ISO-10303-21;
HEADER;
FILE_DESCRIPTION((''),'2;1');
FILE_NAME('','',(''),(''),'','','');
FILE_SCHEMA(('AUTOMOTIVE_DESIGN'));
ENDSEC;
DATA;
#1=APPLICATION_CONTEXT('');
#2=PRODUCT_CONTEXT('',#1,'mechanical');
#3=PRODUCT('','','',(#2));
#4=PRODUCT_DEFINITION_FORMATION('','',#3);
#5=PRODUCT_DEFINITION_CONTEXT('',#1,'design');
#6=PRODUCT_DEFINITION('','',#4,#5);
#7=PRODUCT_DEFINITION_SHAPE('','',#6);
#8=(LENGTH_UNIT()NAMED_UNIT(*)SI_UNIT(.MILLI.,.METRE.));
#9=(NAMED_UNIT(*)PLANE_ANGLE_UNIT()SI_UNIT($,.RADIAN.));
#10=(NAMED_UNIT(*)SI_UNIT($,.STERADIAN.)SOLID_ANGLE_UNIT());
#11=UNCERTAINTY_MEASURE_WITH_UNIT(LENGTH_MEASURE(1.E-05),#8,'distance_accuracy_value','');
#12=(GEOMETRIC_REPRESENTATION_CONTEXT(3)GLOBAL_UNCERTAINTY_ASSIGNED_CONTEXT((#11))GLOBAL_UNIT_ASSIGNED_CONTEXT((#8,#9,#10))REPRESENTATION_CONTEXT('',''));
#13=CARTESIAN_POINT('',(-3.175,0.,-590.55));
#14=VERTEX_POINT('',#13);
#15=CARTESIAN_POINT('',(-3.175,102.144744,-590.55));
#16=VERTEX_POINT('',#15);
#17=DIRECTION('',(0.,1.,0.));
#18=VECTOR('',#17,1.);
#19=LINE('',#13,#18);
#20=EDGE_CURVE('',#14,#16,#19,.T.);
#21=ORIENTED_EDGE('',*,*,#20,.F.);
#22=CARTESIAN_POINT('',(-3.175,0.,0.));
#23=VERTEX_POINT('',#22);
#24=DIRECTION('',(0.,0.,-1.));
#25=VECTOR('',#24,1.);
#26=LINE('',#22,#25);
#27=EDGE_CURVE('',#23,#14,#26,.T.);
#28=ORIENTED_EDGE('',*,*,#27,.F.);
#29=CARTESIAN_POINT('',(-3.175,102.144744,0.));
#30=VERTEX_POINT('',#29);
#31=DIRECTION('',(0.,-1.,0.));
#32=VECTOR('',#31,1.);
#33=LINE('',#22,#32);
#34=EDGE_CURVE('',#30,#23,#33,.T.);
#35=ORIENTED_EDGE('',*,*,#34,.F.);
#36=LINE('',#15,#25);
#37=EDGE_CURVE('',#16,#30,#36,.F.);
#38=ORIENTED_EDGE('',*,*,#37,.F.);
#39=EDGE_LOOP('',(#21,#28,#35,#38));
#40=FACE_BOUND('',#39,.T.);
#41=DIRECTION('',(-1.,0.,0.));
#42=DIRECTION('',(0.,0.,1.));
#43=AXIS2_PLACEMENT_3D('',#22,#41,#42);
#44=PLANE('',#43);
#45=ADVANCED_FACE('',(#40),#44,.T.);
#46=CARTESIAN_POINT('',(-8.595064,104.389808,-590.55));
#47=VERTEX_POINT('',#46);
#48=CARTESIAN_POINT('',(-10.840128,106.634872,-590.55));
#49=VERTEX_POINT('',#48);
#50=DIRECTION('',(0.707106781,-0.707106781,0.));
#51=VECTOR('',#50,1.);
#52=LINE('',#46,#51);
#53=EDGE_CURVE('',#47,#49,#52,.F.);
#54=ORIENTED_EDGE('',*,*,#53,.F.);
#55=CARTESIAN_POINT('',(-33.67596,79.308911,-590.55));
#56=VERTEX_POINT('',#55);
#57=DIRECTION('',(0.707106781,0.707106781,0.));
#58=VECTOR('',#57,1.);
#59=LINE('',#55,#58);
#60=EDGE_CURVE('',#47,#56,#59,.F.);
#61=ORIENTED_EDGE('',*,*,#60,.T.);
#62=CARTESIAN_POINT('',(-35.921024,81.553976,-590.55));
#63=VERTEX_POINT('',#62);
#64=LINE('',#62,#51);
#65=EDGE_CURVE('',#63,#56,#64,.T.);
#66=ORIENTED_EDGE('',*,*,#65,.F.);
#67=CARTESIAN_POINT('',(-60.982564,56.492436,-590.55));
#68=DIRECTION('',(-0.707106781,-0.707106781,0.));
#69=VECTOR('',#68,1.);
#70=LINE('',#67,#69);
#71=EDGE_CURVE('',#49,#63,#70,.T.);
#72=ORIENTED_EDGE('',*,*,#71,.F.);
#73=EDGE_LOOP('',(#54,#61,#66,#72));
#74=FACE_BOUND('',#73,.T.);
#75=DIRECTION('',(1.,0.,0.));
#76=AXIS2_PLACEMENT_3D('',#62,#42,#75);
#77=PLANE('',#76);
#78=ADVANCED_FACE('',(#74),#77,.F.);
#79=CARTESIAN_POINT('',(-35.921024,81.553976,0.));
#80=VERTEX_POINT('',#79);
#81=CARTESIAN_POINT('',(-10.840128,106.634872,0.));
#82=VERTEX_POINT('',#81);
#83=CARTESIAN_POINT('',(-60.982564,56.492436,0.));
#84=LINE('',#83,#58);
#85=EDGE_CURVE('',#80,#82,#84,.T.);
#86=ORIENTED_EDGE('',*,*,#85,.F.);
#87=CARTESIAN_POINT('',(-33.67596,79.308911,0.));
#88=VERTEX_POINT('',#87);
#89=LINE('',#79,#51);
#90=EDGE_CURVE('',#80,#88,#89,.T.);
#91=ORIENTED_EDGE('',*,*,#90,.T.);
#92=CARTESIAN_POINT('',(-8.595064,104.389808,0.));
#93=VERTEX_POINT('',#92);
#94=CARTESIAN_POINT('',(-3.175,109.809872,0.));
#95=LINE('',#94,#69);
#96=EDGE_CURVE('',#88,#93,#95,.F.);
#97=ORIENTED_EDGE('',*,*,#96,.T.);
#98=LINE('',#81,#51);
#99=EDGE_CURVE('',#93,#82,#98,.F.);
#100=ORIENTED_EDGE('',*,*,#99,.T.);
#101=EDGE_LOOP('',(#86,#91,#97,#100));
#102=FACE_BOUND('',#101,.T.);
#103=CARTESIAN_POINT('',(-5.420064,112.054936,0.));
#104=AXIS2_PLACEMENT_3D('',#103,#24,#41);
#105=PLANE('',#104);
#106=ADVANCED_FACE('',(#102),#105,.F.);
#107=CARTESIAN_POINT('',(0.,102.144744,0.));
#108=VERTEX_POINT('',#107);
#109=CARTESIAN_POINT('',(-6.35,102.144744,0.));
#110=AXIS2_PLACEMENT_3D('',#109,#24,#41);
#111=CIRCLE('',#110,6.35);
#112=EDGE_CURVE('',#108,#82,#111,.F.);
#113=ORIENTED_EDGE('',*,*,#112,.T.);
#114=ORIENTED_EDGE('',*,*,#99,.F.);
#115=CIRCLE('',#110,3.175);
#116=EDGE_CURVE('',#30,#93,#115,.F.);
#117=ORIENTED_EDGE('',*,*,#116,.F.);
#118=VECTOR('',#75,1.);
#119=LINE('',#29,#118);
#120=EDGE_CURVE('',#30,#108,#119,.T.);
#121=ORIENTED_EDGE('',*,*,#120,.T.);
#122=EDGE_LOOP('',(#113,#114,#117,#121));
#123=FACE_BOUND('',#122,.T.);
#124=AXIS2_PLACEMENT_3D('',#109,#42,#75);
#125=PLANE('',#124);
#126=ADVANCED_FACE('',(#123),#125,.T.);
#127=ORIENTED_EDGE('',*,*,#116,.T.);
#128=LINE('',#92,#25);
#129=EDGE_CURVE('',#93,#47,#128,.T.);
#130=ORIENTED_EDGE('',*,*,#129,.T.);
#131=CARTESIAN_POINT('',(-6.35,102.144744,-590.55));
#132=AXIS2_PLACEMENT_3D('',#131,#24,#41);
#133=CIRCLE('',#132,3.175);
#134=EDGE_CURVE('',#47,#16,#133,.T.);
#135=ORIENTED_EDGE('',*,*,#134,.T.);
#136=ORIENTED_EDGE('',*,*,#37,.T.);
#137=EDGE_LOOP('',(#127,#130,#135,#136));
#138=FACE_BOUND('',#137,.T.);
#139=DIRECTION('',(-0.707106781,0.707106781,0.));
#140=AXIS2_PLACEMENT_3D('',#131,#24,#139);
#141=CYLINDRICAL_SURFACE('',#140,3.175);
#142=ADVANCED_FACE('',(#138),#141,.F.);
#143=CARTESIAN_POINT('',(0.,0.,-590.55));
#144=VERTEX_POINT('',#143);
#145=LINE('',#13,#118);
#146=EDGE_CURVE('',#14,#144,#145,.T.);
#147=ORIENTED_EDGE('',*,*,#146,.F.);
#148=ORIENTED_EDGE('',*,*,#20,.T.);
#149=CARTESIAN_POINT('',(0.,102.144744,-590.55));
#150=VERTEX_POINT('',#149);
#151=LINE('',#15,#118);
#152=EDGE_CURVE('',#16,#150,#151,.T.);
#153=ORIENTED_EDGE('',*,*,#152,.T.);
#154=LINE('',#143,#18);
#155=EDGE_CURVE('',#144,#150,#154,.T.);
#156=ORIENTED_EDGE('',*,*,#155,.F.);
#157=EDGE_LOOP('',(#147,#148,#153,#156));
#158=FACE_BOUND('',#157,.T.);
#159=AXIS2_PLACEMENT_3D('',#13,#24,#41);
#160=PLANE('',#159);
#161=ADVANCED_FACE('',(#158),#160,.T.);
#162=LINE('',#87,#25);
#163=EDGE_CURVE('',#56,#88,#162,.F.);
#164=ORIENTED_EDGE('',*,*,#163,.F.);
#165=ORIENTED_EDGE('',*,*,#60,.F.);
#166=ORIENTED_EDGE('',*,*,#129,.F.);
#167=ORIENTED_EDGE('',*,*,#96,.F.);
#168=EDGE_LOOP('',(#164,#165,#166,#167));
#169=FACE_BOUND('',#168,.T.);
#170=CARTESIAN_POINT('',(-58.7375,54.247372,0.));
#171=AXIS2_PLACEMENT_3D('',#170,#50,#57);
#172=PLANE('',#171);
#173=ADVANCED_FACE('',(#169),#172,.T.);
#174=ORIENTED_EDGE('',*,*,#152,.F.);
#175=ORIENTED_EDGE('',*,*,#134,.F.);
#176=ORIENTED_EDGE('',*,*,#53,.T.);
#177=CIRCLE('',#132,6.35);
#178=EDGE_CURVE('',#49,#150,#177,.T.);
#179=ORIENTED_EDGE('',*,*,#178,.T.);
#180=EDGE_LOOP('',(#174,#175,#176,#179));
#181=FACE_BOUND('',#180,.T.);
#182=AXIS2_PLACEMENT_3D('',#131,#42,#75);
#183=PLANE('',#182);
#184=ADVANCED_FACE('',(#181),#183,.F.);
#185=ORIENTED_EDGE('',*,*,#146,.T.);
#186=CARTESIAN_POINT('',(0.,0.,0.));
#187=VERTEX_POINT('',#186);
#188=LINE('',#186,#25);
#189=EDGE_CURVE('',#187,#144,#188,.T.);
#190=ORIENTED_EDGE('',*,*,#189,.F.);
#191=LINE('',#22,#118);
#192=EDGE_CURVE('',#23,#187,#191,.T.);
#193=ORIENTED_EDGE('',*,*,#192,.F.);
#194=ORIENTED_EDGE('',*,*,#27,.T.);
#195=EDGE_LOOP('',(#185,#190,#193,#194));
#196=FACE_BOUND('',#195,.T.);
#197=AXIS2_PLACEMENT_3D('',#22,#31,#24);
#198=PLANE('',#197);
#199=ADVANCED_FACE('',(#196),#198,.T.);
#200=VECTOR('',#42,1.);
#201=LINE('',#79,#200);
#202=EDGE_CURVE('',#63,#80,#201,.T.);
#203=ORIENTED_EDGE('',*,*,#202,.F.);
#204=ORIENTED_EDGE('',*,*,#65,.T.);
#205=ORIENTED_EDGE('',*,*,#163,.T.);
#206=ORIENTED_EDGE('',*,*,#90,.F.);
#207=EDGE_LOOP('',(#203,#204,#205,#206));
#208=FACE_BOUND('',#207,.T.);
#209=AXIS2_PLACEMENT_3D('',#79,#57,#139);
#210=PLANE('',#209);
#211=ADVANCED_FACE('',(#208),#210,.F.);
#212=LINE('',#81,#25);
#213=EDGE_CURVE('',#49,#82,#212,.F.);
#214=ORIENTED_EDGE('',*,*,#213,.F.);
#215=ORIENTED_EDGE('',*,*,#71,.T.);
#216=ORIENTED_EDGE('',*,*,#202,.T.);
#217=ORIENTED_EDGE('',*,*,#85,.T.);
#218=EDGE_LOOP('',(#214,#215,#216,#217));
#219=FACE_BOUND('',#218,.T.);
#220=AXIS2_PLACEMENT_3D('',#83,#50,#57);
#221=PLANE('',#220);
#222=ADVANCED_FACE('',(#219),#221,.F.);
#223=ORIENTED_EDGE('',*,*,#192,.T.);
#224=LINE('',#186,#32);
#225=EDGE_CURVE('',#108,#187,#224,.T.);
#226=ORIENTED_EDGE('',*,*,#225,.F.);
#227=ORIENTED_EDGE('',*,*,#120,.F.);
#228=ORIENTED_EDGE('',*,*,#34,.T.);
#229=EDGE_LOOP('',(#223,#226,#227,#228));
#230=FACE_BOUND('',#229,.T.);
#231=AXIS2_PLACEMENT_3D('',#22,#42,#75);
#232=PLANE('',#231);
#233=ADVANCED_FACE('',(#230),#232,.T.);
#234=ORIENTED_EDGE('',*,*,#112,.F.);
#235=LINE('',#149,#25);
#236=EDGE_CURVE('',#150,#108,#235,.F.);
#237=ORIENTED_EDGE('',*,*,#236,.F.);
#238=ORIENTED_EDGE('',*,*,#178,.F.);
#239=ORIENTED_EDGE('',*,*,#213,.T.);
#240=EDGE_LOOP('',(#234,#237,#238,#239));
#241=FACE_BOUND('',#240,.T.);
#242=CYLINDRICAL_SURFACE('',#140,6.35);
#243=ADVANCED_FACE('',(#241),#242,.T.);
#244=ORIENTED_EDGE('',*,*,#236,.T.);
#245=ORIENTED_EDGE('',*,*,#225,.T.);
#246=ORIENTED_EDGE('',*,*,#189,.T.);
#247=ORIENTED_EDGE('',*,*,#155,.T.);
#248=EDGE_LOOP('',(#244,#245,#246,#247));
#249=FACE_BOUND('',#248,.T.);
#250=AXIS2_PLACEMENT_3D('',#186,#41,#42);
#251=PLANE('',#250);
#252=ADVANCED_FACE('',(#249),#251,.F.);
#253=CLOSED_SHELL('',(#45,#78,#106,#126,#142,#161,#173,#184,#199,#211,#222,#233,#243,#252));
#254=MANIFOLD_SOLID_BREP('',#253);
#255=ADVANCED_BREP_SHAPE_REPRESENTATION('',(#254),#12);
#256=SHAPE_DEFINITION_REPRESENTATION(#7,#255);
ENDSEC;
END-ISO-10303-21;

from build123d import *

# Parameters (mm, degrees)
SKETCH1_W            = 590.55
SKETCH1_H            = 114.3
BASE_FLANGE1_DEPTH   = 3.175
EDGE_FLANGE1_START   = -590.55
EDGE_FLANGE1_DEPTH   = 590.55
EDGE_FLANGE1_2_DEPTH = 590.55


# Read off the part's stored shape, not the designer's step: Edge-Flange1
# Sheet-metal steps are written as plain solids
with BuildPart() as part:
    # Sketch1 → Base-Flange1 (new body)
    with BuildSketch(Plane(origin=(0, 0, 0), x_dir=(0, 0, -1), z_dir=(1, 0, 0))):
        with Locations((295.275, 57.15)):
            Rectangle(SKETCH1_W, SKETCH1_H)
    extrude(amount=-BASE_FLANGE1_DEPTH)

    # Edge-Flange1 outline → Edge-Flange1 (cut)
    with BuildSketch(Plane.XY.offset(EDGE_FLANGE1_START)):
        with BuildLine():
            Line((-3.175, 114.3), (-3.175, 107.644005193))
            ThreePointArc((-3.175, 107.644005193), (-0.850738686, 105.319743879), (0, 102.144743879))
            Line((0, 102.144743879), (0, 114.3))
            Line((0, 114.3), (-3.175, 114.3))
        make_face()
    extrude(amount=EDGE_FLANGE1_DEPTH, mode=Mode.SUBTRACT)

    # Edge-Flange1 2 outline → Edge-Flange1 2 (add)
    with BuildSketch(Plane.XY.offset(EDGE_FLANGE1_START)):
        with BuildLine():
            ThreePointArc((-3.175, 107.644005193), (-7.178841321, 108.440418748), (-10.840128061, 106.634871939))
            Line((-10.840128061, 106.634871939), (-35.921024484, 81.553975516))
            Line((-35.921024484, 81.553975516), (-33.675960454, 79.308911485))
            Line((-33.675960454, 79.308911485), (-8.59506403, 104.389807909))
            ThreePointArc((-8.59506403, 104.389807909), (-5.134980102, 105.078061395), (-3.175, 102.144743879))
            Line((-3.175, 102.144743879), (-3.175, 107.644005193))
        make_face()
    extrude(amount=EDGE_FLANGE1_2_DEPTH)


solid = part.part
